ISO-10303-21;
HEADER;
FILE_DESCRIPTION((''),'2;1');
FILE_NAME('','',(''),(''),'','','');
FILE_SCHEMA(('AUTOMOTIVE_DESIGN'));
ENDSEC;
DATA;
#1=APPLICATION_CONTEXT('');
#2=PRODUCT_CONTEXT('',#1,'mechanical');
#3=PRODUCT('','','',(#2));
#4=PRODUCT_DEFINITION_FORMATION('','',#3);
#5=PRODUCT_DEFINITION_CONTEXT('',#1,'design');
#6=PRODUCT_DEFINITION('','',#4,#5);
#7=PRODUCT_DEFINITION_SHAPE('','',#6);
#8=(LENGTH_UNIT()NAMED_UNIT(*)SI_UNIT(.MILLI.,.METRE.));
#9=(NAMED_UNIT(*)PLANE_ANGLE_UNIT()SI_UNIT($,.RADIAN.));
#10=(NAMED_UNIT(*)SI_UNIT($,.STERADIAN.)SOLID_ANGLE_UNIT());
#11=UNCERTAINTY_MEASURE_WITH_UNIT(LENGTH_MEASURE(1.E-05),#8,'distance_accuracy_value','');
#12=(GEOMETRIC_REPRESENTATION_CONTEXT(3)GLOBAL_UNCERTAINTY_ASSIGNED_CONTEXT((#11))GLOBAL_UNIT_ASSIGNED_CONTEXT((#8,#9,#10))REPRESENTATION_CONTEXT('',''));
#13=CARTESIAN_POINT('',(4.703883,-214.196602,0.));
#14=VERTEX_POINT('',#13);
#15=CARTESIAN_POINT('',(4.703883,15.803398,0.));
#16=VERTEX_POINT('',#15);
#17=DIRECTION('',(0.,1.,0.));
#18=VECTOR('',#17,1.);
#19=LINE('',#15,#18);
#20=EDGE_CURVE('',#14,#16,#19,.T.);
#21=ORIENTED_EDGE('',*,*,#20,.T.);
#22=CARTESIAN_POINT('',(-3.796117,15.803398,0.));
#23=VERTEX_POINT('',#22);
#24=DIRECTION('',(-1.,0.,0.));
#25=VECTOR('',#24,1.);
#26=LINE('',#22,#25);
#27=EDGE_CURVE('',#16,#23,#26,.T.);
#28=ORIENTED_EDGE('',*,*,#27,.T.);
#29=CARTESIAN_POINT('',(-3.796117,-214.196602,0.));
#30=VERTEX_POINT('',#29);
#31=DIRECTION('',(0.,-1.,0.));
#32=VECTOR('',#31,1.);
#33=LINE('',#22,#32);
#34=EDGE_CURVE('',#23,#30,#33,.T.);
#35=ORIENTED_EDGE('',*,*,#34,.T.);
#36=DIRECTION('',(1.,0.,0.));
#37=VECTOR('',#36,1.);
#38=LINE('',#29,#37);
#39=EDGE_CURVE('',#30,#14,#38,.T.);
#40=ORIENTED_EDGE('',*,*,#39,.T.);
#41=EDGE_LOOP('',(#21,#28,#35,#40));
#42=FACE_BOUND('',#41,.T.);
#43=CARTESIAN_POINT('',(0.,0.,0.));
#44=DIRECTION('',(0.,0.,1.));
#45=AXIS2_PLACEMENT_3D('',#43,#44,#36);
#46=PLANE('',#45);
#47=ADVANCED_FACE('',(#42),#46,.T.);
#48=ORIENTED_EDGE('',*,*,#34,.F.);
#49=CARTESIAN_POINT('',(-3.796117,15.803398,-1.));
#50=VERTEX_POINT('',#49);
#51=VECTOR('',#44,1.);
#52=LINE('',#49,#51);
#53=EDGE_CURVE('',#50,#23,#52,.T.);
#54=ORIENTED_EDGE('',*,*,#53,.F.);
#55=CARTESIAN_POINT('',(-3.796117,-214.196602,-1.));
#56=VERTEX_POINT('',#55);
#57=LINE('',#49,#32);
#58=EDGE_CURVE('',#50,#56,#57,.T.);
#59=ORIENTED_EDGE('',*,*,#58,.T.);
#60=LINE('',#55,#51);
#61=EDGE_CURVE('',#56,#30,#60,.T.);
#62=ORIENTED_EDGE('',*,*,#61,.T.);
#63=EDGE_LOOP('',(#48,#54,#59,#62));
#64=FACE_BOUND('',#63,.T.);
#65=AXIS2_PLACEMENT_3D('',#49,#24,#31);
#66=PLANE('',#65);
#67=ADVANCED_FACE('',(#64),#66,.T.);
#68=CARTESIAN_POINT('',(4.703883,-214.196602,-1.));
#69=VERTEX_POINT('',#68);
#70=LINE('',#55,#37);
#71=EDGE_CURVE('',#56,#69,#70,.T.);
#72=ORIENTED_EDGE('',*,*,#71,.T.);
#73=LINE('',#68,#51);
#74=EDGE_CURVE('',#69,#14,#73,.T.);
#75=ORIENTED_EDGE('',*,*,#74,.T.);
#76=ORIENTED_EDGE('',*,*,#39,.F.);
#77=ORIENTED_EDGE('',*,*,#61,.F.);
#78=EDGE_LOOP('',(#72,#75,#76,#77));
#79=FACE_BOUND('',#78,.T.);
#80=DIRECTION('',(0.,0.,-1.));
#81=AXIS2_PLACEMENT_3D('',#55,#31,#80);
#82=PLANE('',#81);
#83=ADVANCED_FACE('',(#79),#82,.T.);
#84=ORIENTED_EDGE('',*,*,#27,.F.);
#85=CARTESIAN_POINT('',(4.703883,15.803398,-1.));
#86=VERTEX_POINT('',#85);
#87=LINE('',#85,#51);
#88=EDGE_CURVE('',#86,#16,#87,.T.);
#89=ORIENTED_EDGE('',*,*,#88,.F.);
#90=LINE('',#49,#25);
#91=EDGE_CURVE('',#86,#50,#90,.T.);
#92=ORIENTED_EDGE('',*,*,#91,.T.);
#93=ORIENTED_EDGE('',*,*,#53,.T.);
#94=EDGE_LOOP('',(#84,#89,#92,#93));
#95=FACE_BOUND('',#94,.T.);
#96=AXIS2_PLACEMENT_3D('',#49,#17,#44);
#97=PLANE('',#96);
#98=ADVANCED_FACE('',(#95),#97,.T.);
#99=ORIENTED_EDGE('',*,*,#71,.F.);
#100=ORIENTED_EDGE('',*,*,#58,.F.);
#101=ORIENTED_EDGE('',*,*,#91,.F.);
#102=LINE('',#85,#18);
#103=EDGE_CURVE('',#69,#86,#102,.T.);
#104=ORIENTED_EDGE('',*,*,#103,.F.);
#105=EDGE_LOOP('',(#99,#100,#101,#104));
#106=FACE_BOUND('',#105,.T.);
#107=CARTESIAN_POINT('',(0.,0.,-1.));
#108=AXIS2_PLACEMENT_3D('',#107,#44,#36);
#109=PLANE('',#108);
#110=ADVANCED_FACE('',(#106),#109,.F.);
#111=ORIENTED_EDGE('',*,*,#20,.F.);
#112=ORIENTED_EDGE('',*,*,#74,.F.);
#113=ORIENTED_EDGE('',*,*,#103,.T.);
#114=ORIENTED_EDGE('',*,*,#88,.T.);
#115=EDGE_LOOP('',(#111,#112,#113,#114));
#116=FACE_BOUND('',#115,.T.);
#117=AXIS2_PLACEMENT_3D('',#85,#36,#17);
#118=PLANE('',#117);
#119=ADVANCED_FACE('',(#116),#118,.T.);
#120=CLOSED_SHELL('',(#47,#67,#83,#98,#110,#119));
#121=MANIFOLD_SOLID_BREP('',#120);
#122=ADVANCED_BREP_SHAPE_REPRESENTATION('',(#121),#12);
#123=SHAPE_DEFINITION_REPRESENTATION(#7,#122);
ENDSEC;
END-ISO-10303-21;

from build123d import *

# Parameters (mm, degrees)
SKETCH1_W          = 8.5
SKETCH1_H          = 230
BASE_FLANGE1_DEPTH = 1


# Sheet-metal steps are written as plain solids
with BuildPart() as part:
    # Sketch1 → Base-Flange1 (new body)
    with BuildSketch(Plane.XY):
        with Locations((0.453883495, -99.196601942)):
            Rectangle(SKETCH1_W, SKETCH1_H)
    extrude(amount=-BASE_FLANGE1_DEPTH)


solid = part.part
